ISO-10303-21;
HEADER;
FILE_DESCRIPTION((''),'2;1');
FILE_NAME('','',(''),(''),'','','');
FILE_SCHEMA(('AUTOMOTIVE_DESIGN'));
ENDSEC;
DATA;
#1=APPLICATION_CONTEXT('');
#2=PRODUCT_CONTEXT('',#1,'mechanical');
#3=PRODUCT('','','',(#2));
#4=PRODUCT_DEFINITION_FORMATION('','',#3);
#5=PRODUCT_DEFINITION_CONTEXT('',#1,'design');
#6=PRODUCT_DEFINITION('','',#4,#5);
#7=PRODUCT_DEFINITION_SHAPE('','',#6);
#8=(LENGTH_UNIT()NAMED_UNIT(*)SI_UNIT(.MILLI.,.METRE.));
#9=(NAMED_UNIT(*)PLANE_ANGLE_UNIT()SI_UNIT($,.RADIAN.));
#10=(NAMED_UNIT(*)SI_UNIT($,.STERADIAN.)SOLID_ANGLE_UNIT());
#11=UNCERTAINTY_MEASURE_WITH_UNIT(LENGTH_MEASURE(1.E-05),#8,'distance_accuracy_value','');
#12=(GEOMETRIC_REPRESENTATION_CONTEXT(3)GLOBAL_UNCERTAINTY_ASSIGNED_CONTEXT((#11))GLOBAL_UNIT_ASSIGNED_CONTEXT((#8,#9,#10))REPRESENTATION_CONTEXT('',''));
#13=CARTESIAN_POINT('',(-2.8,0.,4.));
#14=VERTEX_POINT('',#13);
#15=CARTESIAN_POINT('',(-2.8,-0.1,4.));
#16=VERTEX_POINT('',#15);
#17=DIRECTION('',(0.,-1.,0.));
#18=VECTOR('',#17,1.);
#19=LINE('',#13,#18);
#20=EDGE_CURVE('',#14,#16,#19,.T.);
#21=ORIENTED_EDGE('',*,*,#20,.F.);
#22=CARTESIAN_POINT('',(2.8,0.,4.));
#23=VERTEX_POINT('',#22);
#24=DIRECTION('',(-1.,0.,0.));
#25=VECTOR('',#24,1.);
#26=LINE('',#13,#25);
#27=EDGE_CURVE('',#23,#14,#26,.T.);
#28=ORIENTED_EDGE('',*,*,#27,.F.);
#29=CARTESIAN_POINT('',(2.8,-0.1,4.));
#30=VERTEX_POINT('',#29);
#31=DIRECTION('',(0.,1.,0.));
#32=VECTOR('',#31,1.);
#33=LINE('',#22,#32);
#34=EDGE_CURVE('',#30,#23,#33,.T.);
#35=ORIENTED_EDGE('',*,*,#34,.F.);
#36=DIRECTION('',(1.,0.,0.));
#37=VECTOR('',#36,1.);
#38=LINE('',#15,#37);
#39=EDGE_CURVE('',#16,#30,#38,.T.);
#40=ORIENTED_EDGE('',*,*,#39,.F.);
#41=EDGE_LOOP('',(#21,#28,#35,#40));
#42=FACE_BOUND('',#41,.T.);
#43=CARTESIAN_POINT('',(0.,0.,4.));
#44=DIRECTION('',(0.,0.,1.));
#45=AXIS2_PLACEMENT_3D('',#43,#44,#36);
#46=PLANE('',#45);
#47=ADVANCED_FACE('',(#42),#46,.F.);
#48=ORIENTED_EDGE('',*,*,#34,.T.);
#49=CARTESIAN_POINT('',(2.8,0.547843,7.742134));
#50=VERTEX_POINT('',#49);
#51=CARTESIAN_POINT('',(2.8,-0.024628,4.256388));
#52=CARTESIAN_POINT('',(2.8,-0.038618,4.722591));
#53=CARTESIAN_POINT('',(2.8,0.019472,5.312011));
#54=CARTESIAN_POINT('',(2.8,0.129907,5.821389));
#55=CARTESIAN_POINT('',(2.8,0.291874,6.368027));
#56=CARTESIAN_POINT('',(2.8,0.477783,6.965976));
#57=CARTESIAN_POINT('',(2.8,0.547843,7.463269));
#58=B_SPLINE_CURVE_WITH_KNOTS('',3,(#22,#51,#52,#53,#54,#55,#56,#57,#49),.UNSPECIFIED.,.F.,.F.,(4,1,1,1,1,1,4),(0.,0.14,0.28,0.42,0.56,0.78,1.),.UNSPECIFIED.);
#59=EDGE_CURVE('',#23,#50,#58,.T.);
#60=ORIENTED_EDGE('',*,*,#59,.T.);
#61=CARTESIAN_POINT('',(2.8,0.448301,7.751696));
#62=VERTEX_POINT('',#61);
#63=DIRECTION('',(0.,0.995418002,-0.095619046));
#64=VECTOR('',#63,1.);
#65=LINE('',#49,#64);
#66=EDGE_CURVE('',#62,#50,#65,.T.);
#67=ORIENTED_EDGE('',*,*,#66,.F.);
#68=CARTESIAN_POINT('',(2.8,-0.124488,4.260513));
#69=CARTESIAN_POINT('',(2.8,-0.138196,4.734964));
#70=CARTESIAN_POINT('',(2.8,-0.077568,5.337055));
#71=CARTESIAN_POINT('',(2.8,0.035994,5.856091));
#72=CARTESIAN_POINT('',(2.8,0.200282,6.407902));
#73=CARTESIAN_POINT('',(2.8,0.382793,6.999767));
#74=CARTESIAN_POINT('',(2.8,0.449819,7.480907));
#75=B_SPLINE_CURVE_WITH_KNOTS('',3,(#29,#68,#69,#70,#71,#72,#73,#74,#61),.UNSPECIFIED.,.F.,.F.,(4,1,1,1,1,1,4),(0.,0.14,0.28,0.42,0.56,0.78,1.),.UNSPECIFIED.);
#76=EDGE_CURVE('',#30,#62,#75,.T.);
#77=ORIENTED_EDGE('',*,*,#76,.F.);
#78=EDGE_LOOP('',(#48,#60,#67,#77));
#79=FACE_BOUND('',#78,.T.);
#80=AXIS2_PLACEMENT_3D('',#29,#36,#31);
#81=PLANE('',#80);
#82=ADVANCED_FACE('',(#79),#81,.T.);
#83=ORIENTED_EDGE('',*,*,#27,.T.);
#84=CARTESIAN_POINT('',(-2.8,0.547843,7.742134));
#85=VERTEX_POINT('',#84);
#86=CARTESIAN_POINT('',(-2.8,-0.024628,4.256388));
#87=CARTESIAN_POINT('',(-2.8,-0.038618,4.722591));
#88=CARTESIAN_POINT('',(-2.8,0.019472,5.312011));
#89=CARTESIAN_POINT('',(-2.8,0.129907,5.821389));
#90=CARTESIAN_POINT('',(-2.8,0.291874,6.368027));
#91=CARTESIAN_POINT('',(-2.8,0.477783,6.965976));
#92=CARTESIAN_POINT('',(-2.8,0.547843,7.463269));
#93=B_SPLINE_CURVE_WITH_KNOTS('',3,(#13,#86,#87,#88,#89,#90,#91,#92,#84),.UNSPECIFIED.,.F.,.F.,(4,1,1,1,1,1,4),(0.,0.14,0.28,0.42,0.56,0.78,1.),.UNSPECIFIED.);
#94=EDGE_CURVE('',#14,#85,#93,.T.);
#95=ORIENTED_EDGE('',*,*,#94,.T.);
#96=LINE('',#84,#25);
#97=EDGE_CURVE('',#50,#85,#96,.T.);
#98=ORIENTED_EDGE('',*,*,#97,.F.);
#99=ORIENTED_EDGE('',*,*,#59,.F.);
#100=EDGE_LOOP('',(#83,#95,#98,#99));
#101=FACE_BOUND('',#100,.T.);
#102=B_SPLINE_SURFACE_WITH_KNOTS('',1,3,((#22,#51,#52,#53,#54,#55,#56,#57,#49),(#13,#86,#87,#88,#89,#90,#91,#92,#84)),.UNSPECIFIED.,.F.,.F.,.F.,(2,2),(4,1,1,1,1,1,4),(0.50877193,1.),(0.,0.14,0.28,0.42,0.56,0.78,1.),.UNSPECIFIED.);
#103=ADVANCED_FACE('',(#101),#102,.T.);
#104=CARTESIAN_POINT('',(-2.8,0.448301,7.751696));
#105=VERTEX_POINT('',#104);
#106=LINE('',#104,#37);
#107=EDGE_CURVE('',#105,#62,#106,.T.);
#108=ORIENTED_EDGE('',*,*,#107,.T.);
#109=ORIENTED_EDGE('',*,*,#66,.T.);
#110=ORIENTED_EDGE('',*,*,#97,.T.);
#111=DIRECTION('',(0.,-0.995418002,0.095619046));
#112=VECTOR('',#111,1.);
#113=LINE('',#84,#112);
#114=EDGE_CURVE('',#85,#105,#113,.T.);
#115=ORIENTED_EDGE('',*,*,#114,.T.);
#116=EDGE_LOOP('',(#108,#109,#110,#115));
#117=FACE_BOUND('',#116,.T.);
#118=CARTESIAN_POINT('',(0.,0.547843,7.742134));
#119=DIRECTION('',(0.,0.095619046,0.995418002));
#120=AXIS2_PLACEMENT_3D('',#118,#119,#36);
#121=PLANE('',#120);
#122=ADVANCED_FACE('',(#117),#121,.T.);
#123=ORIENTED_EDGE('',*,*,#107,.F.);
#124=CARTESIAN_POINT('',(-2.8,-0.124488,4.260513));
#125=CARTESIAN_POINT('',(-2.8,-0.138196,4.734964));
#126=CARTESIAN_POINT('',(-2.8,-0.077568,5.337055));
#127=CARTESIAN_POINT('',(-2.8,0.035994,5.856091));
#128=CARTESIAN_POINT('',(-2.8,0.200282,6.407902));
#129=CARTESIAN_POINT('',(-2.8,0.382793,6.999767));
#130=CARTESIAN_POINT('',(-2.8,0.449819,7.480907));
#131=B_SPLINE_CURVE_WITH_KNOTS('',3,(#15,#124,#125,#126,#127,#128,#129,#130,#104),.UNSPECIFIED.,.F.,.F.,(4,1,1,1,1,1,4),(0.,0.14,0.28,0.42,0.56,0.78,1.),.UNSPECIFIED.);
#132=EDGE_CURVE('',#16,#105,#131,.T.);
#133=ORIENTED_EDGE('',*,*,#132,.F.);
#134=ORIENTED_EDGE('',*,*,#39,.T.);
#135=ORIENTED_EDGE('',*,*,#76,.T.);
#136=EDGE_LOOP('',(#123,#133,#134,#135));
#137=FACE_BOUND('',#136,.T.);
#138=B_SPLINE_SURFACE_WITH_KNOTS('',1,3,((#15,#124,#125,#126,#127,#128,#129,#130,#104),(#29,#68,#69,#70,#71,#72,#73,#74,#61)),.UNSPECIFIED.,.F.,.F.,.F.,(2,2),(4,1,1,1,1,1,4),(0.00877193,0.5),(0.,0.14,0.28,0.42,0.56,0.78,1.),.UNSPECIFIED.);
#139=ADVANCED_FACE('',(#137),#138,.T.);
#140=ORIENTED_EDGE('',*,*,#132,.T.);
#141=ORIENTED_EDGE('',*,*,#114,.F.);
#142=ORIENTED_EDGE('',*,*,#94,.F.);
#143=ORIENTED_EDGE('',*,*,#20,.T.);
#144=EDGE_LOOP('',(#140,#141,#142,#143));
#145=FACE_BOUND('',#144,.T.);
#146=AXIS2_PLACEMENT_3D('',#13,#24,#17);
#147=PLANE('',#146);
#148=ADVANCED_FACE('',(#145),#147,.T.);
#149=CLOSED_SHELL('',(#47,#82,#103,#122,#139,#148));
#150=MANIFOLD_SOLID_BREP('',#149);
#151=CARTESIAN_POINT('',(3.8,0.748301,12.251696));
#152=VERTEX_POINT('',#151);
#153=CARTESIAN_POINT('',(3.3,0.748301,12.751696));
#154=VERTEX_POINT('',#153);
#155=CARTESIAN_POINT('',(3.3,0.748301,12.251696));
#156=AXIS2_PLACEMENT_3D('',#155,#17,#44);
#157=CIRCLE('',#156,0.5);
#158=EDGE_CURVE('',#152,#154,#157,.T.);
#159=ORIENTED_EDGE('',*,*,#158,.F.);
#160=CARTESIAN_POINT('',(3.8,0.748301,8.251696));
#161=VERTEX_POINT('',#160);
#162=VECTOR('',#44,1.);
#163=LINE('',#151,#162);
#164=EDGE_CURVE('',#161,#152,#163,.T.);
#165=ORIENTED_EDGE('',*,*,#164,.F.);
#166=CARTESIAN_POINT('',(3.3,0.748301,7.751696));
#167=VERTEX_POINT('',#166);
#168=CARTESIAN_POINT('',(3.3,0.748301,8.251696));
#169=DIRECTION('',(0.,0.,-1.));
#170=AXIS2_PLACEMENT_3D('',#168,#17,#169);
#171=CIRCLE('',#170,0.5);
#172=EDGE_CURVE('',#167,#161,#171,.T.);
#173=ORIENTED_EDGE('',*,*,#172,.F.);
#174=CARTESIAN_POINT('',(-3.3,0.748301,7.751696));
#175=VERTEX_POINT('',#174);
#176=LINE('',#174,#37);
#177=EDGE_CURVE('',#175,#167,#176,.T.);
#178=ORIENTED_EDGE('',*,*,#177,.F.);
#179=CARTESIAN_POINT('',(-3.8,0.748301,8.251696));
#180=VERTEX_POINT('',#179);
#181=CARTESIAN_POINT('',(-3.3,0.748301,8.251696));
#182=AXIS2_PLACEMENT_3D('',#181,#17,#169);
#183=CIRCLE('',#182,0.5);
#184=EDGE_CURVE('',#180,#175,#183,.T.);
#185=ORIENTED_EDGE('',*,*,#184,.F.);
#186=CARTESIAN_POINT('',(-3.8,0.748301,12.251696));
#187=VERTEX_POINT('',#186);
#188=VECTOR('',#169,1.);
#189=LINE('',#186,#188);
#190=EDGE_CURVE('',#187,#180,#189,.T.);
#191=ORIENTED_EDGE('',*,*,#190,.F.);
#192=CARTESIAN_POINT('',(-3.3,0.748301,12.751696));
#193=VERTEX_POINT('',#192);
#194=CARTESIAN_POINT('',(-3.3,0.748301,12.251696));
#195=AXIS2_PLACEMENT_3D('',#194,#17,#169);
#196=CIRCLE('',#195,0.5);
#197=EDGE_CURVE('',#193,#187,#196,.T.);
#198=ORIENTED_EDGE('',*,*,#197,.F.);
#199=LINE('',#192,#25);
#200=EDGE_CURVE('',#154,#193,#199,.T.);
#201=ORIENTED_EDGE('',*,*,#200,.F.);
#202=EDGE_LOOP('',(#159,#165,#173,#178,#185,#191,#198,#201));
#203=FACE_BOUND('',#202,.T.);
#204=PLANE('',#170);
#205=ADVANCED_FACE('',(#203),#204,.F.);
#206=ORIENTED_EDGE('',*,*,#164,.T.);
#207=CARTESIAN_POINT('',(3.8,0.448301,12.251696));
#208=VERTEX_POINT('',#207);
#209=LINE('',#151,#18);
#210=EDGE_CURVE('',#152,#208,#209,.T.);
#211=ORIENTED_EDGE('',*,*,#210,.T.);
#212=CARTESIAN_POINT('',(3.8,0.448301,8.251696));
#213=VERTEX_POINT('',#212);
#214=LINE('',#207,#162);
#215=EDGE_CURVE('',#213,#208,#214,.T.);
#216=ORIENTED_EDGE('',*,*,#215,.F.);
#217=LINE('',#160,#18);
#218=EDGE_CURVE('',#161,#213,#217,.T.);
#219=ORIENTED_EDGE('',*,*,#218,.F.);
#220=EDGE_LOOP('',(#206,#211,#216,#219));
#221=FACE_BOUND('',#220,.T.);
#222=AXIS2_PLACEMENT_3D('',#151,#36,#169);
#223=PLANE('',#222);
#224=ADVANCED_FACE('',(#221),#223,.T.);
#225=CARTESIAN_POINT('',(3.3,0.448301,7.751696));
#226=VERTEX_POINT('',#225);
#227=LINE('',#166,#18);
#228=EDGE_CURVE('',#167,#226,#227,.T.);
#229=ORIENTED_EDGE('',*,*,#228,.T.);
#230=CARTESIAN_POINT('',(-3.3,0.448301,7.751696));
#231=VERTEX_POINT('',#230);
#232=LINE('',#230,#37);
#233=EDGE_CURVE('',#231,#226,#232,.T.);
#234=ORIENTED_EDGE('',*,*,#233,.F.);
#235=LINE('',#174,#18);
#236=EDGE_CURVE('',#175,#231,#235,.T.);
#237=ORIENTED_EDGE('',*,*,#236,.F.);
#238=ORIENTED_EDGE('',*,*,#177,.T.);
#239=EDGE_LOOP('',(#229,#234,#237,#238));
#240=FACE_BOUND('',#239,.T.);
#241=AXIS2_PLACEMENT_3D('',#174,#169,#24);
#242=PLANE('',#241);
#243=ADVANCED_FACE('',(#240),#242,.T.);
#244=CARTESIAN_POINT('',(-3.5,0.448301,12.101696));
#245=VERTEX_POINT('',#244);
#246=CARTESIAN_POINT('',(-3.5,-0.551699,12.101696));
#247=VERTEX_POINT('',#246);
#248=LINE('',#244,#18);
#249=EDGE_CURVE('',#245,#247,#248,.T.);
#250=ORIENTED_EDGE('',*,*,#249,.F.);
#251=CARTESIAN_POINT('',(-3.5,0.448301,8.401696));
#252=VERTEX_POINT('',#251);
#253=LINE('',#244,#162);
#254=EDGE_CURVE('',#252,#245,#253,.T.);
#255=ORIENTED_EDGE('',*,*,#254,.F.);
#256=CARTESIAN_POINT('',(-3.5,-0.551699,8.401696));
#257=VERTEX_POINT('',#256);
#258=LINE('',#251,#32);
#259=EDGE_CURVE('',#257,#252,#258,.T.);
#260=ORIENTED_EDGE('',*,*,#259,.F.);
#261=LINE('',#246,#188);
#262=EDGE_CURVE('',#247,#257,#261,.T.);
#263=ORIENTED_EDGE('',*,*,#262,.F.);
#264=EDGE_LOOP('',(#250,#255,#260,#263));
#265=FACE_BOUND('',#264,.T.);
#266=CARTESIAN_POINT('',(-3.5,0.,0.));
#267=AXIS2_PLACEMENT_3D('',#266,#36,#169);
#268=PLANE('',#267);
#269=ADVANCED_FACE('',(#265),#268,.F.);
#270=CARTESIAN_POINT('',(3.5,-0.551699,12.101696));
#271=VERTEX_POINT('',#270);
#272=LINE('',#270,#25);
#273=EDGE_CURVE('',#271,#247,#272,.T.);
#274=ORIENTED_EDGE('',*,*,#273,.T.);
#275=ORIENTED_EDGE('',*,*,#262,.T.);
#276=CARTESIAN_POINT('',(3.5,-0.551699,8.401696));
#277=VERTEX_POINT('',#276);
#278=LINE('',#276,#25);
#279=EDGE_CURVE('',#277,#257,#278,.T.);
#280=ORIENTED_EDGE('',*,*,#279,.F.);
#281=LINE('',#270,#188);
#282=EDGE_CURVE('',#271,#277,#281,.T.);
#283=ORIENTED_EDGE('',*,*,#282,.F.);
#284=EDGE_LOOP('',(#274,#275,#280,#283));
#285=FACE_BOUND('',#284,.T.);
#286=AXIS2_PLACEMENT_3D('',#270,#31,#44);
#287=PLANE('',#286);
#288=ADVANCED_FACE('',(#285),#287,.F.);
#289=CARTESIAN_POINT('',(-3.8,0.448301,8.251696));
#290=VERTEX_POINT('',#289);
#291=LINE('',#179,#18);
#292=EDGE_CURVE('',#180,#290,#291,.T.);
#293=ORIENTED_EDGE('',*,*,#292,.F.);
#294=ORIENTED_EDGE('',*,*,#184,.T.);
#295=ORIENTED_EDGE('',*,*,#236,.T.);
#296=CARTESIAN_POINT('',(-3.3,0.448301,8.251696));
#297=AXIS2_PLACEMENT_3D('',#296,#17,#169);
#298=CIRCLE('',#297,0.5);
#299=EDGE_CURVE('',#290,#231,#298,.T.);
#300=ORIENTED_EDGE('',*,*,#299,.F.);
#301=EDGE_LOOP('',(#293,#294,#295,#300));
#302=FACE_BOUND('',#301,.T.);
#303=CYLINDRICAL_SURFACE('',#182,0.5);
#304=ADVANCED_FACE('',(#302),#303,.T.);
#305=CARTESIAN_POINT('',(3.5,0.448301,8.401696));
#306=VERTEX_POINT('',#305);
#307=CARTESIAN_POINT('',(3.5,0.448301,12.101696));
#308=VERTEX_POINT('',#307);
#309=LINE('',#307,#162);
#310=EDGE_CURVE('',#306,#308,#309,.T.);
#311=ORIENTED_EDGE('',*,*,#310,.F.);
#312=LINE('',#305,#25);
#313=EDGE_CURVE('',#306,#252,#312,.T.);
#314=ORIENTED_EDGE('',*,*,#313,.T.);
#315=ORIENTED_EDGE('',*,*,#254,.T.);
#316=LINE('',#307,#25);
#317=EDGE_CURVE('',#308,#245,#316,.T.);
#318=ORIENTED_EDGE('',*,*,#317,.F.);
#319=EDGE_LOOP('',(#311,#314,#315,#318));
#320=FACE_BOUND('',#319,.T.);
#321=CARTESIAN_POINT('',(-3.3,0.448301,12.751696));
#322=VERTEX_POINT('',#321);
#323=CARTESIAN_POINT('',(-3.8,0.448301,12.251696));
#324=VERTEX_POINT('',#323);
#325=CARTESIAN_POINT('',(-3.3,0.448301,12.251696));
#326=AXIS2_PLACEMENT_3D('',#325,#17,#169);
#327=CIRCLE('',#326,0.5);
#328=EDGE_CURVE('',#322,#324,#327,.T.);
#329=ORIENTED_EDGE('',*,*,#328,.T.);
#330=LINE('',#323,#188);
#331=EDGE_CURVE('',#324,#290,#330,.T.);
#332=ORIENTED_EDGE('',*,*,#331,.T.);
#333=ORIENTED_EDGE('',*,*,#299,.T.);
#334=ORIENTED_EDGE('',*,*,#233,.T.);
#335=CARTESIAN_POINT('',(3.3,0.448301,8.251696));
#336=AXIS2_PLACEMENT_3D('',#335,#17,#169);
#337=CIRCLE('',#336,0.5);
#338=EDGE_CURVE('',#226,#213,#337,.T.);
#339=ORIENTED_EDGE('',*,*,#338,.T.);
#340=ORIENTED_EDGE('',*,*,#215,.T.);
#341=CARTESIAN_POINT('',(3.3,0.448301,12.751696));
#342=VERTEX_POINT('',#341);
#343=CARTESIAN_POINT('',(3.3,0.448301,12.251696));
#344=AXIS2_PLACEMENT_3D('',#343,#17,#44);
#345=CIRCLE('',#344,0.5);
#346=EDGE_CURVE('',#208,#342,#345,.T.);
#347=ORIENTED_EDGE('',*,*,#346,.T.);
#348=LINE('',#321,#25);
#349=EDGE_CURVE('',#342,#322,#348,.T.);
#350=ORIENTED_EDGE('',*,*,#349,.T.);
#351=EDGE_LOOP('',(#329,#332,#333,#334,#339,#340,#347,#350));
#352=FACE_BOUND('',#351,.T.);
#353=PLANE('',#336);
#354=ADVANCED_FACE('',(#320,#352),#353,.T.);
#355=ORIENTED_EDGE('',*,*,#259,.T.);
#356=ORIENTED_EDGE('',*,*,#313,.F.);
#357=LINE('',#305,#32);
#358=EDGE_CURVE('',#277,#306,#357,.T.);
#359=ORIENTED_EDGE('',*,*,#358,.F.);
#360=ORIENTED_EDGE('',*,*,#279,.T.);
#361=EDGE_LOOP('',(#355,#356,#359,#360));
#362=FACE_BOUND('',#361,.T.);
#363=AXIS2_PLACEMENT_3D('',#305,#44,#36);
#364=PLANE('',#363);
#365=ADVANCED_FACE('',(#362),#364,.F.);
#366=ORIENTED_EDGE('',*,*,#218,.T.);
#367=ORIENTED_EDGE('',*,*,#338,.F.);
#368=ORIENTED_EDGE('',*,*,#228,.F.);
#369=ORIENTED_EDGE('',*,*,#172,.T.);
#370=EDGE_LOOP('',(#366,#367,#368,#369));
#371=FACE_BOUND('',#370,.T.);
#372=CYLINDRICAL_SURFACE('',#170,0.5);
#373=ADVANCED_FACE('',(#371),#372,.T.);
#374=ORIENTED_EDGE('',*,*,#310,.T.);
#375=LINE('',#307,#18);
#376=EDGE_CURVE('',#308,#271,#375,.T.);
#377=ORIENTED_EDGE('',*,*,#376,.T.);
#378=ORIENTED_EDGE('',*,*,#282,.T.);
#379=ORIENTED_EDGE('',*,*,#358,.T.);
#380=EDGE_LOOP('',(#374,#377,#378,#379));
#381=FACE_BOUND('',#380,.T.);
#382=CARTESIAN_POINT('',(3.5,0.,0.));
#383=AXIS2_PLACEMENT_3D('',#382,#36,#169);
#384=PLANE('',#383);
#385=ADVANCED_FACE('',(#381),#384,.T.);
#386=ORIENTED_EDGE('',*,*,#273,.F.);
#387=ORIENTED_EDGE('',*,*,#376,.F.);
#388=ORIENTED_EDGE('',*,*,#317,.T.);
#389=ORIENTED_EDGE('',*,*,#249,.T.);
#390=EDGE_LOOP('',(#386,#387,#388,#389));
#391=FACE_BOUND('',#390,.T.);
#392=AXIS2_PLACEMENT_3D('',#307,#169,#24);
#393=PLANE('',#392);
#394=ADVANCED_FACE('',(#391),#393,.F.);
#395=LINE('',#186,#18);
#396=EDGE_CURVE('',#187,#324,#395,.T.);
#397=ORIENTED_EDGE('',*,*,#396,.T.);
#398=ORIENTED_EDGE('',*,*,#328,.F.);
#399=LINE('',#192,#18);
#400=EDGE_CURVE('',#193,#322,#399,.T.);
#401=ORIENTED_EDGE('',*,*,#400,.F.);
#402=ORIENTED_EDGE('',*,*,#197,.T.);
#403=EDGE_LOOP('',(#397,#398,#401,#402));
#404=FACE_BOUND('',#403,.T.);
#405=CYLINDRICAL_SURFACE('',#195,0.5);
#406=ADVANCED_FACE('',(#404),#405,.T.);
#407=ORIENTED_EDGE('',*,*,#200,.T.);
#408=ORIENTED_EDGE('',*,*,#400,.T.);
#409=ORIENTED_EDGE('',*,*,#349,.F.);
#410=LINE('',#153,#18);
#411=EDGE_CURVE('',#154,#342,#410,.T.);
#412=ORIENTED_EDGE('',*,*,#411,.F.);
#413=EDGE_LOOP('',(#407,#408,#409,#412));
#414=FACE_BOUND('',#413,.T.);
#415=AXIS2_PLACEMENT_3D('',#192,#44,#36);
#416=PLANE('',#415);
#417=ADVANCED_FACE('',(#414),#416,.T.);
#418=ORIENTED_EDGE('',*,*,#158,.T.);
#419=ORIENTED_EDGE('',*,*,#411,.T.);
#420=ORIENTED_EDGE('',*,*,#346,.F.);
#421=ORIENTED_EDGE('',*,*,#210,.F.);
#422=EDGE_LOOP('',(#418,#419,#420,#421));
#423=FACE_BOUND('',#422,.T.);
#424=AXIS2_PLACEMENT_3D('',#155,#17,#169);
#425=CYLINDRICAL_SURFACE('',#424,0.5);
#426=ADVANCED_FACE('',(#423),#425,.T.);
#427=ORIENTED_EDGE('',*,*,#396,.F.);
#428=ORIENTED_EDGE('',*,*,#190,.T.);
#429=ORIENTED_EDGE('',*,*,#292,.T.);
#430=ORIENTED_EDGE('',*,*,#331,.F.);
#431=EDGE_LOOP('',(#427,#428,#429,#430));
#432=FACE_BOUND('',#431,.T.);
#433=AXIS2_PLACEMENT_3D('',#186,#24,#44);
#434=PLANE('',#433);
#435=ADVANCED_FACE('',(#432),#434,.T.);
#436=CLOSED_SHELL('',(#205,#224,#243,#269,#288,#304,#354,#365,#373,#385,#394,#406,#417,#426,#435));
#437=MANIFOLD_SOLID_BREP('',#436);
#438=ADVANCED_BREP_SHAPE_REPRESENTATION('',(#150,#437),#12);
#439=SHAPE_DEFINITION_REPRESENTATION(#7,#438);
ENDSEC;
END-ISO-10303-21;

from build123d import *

# Parameters (mm, degrees)
F_3_8MM_FREE_LENGTH_START    = -2.8
F_3_8MM_FREE_LENGTH_DEPTH    = 5.6
PCB_DEPTH                    = 0.3
SKIZZE7_W                    = 3.7
SKIZZE7_H                    = 1
CONNECTOR_BOUNDARY_BOX_DEPTH = 3.5


# Read off the part's stored shape, not the designer's step: 3,8mm_free_Length
with BuildPart() as part:
    # 3,8mm_free_Length outline → 3,8mm_free_Length (new body)
    with BuildSketch(Plane.YZ.offset(F_3_8MM_FREE_LENGTH_START)):
        with BuildLine():
            add(Edge.make_bspline(
                [(0, 4), (-0.024628468, 4.256388466), (-0.038618016, 4.72259081), (0.01947153, 5.312011185), (0.129906645, 5.821389043), (0.291873769, 6.368027096), (0.477782991, 6.965975593), (0.547843022, 7.463268805), (0.547843022, 7.742133946)],
                knots=[0, 0, 0, 0, 0.14, 0.28, 0.42, 0.56, 0.78, 1, 1, 1, 1], degree=3))
            Line((0.547843022, 7.742133946), (0.448301222, 7.75169585))
            add(Edge.make_bspline(
                [(-0.1, 4), (-0.124487823, 4.260512861), (-0.138196079, 4.734963994), (-0.077568446, 5.337055167), (0.035994262, 5.856090972), (0.200282397, 6.407901627), (0.382793216, 6.999767267), (0.449818564, 7.4809073), (0.448301222, 7.75169585)],
                knots=[0, 0, 0, 0, 0.14, 0.28, 0.42, 0.56, 0.78, 1, 1, 1, 1], degree=3))
            Line((-0.1, 4), (0, 4))
        make_face()
    extrude(amount=F_3_8MM_FREE_LENGTH_DEPTH)


with BuildPart() as body_2:
    # Skizze6 → PCB (new body)
    with BuildSketch(Plane(origin=(0, 0.448301222, 0), x_dir=(-1, 0, 0), z_dir=(0, -1, 0))):
        with BuildLine():
            Line((3.3, -12.75169585), (-3.3, -12.75169585))
            ThreePointArc((-3.3, -12.75169585), (-3.653553391, -12.605249241), (-3.8, -12.25169585))
            Line((-3.8, -12.25169585), (-3.8, -8.25169585))
            ThreePointArc((-3.8, -8.25169585), (-3.653553391, -7.89814246), (-3.3, -7.75169585))
            Line((-3.3, -7.75169585), (3.3, -7.75169585))
            ThreePointArc((3.3, -7.75169585), (3.653553391, -7.89814246), (3.8, -8.25169585))
            Line((3.8, -8.25169585), (3.8, -12.25169585))
            ThreePointArc((3.8, -12.25169585), (3.653553391, -12.605249241), (3.3, -12.75169585))
        make_face()
    extrude(amount=-PCB_DEPTH)

    # Skizze7 → Connector_Boundary-Box (add, symmetric)
    with BuildSketch(Plane(origin=(0, 0, 0), x_dir=(0, 0, -1), z_dir=(1, 0, 0))):
        with Locations((-10.25169585, -0.051698778)):
            Rectangle(SKIZZE7_W, SKIZZE7_H)
    extrude(amount=CONNECTOR_BOUNDARY_BOX_DEPTH, both=True)


solid = Compound([part.part, body_2.part])
